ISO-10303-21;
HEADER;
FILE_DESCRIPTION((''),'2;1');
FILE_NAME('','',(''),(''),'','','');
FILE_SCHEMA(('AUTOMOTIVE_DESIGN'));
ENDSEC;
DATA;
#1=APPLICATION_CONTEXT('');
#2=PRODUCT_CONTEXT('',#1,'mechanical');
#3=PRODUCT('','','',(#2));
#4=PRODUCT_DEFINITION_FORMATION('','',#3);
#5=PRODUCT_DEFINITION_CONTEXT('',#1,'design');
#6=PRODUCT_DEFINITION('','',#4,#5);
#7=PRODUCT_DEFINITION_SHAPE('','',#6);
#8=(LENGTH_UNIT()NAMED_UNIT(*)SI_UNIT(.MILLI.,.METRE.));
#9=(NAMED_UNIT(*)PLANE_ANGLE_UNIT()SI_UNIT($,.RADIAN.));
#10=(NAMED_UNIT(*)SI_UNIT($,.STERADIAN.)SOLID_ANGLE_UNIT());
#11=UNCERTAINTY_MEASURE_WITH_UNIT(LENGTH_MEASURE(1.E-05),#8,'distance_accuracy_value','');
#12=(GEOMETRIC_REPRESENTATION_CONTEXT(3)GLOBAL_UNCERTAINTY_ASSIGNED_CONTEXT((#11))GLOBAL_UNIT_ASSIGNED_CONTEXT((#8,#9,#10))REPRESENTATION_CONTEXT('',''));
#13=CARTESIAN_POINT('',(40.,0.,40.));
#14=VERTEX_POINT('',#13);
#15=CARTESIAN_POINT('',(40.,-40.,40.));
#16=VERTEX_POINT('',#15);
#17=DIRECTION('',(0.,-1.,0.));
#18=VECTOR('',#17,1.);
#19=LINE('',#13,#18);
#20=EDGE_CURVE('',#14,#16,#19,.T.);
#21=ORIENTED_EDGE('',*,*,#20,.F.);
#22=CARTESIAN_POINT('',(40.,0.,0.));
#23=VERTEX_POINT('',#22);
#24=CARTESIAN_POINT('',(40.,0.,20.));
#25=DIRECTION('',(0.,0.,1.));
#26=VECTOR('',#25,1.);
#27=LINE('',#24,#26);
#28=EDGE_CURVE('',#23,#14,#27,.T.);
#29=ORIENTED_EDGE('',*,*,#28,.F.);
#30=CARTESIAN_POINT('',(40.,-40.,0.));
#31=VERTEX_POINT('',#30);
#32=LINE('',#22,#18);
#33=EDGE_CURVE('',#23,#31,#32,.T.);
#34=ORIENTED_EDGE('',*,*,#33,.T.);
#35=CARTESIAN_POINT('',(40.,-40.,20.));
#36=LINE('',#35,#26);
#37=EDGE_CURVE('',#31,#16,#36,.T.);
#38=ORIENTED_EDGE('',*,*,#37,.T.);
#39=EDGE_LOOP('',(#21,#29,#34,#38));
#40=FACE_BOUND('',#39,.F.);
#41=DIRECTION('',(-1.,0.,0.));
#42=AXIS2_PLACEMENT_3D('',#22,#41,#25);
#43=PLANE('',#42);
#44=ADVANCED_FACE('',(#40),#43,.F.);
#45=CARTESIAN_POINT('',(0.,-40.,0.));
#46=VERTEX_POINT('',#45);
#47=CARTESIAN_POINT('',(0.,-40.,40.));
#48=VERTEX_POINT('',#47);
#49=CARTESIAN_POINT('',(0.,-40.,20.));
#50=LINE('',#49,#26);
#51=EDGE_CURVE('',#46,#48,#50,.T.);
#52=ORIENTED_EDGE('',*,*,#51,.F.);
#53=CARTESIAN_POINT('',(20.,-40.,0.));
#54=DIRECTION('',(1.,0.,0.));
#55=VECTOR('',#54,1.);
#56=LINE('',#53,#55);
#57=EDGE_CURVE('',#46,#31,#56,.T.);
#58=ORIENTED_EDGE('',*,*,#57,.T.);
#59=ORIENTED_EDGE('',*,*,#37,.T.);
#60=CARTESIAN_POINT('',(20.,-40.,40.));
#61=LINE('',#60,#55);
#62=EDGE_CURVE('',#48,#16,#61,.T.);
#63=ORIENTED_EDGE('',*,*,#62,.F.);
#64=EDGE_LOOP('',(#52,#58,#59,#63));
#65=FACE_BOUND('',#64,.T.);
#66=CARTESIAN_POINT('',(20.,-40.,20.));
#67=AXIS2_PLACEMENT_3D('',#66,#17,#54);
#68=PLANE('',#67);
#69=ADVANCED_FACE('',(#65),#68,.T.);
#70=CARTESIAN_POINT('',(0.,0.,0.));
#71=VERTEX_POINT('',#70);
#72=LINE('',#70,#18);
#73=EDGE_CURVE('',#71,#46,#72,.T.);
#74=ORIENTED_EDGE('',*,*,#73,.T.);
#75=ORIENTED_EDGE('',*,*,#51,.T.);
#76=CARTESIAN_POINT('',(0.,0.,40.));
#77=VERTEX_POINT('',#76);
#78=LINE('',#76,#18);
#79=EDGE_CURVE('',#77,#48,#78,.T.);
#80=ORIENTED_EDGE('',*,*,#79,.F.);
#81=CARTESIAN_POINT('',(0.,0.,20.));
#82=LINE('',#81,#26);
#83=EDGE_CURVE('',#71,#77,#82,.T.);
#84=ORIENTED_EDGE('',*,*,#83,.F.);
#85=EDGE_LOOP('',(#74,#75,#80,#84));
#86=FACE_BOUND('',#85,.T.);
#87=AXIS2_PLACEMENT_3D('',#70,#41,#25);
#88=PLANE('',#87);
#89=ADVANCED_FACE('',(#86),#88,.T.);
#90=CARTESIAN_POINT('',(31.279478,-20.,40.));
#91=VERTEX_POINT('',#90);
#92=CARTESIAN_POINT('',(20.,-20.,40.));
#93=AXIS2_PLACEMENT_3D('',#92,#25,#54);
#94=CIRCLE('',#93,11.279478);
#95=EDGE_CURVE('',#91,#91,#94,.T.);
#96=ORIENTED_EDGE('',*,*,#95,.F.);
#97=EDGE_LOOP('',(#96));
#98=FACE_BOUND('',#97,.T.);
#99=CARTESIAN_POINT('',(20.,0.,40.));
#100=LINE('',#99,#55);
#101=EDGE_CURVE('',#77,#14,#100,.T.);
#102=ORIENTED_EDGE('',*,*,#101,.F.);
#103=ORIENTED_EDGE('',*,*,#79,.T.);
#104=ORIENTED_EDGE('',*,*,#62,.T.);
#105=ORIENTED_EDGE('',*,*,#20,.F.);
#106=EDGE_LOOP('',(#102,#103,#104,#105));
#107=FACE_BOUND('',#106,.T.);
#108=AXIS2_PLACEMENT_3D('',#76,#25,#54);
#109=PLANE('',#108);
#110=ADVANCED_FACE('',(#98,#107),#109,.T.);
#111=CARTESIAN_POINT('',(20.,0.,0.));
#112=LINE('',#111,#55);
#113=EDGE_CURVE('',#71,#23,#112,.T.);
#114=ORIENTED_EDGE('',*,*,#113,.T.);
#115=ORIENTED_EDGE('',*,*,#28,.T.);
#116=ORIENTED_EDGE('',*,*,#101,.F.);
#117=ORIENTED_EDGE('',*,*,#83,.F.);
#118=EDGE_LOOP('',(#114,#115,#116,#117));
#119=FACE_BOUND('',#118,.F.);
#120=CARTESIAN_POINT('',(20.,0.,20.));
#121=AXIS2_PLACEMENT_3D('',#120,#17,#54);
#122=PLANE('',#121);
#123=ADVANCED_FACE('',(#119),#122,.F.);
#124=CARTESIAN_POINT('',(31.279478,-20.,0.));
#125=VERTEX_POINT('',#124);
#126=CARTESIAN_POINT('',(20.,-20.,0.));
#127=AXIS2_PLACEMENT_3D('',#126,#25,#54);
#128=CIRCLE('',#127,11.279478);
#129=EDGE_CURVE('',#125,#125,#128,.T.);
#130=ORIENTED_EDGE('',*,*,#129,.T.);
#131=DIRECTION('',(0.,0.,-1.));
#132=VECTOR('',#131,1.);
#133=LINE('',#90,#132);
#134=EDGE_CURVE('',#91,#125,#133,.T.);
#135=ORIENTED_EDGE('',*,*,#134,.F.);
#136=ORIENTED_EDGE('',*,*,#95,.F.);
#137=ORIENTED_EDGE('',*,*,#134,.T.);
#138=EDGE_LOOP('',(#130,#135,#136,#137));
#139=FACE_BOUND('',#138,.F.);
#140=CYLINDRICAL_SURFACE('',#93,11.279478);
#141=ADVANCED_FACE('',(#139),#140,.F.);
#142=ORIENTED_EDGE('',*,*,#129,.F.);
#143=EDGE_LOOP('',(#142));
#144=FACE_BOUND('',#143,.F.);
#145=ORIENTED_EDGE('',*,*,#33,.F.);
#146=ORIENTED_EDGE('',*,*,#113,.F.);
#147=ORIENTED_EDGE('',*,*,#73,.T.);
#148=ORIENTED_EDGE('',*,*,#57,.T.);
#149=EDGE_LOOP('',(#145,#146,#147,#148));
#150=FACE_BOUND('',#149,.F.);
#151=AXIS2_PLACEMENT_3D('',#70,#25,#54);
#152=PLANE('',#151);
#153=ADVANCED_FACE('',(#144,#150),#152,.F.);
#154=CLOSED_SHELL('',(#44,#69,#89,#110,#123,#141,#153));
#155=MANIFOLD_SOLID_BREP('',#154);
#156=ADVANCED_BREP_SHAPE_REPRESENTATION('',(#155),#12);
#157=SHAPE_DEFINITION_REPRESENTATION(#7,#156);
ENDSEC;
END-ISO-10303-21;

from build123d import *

# Parameters (mm, degrees)
F0_W     = 40
F0_H     = 40
F1_DEPTH = 40
F3_R     = 11.2794780308
F4_DEPTH = 40


# Not quite as in the source:
# - the program builds the solid bodies; features that only make, move or delete a surface that nothing else refers to are left out


with BuildPart() as f1:
    # F0 (on Front) → F1 (new body)
    with BuildSketch(Plane.XZ):
        with Locations((20, 20)):
            Rectangle(F0_W, F0_H)
    extrude(amount=F1_DEPTH)

    # F3 (on face) → F4 (cut)
    with BuildSketch(Plane.XY.offset(40)):
        with Locations((20, -20)):
            Circle(F3_R)
    extrude(amount=-F4_DEPTH, mode=Mode.SUBTRACT)


solid = f1.part
